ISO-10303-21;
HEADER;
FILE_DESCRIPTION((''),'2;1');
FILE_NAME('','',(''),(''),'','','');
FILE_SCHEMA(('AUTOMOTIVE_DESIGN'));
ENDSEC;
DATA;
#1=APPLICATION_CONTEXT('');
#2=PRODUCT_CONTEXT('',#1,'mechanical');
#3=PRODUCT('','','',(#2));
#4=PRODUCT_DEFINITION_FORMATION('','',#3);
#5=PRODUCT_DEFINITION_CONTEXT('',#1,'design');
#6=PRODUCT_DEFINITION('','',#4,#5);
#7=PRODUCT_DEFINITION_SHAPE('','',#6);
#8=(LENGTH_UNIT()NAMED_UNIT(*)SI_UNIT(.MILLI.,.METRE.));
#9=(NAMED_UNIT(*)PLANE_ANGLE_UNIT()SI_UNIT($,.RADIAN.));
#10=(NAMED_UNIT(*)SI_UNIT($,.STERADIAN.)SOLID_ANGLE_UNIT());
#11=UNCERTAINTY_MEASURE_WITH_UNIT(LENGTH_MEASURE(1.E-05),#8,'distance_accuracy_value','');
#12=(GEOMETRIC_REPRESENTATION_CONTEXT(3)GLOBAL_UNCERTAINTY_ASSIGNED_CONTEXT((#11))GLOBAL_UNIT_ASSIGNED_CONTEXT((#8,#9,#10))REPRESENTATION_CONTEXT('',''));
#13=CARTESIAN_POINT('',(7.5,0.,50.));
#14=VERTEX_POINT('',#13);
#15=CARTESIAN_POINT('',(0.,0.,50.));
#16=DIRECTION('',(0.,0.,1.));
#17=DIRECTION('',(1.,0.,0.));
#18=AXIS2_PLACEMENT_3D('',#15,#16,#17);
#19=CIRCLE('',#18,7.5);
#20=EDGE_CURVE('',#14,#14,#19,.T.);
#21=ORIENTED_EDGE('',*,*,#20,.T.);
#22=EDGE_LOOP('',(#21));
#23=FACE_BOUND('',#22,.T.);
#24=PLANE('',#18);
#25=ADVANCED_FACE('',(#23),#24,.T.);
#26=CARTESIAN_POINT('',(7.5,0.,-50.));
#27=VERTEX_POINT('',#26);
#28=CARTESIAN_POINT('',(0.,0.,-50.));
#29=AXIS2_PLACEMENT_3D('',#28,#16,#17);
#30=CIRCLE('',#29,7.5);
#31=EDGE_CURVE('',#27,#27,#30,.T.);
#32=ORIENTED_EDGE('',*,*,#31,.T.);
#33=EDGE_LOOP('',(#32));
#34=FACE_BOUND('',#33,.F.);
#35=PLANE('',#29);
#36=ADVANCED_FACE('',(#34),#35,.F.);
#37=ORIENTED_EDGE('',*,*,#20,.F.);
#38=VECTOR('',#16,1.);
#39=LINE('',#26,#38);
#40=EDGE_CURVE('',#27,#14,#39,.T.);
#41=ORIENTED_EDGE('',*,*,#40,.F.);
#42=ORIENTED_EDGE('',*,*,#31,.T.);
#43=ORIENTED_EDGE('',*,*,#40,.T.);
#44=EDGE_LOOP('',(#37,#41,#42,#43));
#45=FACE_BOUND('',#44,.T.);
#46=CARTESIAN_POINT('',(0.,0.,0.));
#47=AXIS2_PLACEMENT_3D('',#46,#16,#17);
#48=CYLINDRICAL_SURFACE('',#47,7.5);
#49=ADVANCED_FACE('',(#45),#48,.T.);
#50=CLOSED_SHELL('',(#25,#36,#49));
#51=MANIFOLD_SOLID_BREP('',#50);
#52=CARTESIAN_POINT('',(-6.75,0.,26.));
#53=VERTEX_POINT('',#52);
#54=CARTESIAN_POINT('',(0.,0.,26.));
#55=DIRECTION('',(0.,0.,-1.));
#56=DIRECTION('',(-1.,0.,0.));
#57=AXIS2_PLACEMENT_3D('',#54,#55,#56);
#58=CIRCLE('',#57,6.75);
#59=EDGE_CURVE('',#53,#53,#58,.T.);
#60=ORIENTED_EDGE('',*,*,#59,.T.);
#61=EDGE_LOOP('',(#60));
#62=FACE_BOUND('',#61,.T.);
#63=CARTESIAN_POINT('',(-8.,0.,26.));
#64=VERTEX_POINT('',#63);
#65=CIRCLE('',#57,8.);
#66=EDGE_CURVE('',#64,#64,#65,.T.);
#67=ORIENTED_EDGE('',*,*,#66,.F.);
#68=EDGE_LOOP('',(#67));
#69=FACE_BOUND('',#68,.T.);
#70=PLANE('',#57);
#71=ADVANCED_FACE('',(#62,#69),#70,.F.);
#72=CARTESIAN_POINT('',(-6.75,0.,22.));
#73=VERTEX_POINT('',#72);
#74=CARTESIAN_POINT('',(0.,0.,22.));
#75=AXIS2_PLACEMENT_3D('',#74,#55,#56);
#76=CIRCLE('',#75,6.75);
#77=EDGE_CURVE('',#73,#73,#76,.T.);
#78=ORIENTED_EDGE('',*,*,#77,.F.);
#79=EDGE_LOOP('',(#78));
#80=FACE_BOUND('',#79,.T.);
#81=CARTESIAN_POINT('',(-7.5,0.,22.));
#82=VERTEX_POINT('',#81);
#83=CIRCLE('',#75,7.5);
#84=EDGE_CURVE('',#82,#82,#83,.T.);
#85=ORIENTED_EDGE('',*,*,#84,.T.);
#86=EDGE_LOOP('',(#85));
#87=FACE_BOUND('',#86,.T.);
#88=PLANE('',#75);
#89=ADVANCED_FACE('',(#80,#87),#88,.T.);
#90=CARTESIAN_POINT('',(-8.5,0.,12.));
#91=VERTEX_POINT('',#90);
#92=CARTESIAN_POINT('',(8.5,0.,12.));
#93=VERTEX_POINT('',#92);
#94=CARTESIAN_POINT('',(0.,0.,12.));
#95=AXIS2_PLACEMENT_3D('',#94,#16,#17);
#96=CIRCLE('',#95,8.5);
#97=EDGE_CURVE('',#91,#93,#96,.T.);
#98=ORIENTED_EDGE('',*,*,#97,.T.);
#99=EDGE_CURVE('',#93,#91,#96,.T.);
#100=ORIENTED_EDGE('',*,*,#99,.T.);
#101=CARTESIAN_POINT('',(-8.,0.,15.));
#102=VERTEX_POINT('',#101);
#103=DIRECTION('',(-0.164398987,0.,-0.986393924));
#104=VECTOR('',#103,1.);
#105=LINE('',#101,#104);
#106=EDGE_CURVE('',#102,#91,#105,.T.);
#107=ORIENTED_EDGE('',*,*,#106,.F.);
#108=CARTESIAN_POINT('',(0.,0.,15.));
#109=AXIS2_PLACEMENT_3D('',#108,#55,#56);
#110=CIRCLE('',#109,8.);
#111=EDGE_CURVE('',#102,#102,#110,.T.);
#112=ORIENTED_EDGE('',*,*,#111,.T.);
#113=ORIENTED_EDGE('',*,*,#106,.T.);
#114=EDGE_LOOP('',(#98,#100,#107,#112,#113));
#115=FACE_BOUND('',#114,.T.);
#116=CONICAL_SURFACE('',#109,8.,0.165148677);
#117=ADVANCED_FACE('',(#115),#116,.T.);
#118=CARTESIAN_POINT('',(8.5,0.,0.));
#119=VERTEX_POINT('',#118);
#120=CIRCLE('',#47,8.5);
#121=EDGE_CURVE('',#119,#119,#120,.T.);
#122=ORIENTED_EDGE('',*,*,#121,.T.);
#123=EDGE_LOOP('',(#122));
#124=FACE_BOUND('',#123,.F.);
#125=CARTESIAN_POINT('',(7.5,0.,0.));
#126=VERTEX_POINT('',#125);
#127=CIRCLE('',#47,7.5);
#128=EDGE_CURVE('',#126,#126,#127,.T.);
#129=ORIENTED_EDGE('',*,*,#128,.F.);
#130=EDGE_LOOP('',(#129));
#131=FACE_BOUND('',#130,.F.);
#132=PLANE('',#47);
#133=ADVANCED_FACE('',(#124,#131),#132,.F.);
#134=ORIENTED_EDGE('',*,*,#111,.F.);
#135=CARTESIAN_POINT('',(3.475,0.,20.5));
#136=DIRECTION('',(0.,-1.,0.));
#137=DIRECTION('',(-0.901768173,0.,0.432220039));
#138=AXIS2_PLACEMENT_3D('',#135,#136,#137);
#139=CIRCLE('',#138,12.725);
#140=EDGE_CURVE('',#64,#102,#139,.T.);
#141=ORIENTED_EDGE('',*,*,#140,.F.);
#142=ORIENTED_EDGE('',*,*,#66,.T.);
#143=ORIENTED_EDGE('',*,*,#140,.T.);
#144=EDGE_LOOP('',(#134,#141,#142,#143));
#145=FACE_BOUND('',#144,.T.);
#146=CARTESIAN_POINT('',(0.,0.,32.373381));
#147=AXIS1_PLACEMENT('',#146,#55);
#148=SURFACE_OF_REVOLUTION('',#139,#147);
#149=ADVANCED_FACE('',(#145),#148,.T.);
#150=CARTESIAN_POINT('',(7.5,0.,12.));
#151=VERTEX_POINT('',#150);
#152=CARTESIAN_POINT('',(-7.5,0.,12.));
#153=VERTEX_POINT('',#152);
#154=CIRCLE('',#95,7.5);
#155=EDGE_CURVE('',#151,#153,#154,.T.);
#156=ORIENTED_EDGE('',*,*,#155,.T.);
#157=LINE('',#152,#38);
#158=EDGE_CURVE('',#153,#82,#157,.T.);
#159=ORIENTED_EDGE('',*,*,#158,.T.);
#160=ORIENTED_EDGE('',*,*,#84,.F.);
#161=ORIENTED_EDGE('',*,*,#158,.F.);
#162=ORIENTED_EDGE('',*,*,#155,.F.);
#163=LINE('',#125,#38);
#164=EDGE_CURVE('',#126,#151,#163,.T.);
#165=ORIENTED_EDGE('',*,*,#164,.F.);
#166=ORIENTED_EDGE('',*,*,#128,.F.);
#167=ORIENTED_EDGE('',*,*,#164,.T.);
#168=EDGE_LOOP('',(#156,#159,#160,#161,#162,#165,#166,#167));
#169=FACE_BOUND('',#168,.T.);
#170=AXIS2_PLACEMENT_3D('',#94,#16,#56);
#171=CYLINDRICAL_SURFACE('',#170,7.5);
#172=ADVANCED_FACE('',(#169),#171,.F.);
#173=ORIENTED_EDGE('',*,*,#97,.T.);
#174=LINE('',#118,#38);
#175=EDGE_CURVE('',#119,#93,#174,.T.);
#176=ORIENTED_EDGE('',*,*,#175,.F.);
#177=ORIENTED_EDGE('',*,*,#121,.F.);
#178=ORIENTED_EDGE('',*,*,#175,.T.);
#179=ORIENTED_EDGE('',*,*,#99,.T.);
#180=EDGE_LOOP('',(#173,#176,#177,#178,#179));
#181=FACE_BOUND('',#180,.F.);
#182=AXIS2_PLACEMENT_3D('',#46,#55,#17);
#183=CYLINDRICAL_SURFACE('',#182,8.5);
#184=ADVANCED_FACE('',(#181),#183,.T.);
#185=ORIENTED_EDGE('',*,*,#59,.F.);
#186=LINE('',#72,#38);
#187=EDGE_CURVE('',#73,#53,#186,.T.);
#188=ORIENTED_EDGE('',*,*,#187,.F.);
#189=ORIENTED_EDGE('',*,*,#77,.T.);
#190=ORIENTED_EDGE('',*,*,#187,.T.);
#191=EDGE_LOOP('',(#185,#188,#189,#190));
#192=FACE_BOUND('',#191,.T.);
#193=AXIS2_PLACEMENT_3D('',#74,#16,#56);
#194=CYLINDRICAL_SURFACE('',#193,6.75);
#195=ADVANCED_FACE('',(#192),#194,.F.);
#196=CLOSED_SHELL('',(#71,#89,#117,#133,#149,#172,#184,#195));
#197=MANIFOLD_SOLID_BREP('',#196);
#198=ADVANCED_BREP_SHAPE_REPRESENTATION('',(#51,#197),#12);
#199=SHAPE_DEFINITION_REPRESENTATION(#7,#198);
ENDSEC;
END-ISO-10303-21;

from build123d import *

# Parameters (mm, degrees)
F0_R          = 7.5
F1_DEPTH      = 50
F1_DEPTH_BACK = 50
F2_R          = 8.5
F2_R_2        = 7.5
F3_DEPTH      = 12


with BuildPart() as f1:
    # F0 (on Top) → F1 (new body, two sides)
    with BuildSketch(Plane.XY) as f1_sk:
        Circle(F0_R)
    extrude(amount=F1_DEPTH)
    extrude(f1_sk.sketch, amount=-F1_DEPTH_BACK)


with BuildPart() as f3:
    # F2 (on Top) → F3 (new body)
    with BuildSketch(Plane.XY):
        Circle(F2_R)
        Circle(F2_R_2, mode=Mode.SUBTRACT)
    extrude(amount=F3_DEPTH)

    # F4 (on Front) → F5 (revolve)
    with BuildSketch(Plane.XZ):
        with BuildLine():
            Line((-8, 15), (-7.5, 15))
            Line((-7.5, 15), (-7.5, 22))
            Line((-7.5, 22), (-6.75, 22))
            Line((-6.75, 22), (-6.75, 26))
            Line((-6.75, 26), (-7.5, 26))
            Line((-7.5, 26), (-8, 26))
            ThreePointArc((-8, 26), (-9.25, 20.5), (-8, 15))
        make_face()
        Polygon((-7.5, 12), (-7.5, 15), (-8, 15), (-8.5, 12), align=None)
    revolve(axis=Axis((0, 0, 32.3733808473), (0, 0, -1)))


solid = Compound([f1.part, f3.part])
